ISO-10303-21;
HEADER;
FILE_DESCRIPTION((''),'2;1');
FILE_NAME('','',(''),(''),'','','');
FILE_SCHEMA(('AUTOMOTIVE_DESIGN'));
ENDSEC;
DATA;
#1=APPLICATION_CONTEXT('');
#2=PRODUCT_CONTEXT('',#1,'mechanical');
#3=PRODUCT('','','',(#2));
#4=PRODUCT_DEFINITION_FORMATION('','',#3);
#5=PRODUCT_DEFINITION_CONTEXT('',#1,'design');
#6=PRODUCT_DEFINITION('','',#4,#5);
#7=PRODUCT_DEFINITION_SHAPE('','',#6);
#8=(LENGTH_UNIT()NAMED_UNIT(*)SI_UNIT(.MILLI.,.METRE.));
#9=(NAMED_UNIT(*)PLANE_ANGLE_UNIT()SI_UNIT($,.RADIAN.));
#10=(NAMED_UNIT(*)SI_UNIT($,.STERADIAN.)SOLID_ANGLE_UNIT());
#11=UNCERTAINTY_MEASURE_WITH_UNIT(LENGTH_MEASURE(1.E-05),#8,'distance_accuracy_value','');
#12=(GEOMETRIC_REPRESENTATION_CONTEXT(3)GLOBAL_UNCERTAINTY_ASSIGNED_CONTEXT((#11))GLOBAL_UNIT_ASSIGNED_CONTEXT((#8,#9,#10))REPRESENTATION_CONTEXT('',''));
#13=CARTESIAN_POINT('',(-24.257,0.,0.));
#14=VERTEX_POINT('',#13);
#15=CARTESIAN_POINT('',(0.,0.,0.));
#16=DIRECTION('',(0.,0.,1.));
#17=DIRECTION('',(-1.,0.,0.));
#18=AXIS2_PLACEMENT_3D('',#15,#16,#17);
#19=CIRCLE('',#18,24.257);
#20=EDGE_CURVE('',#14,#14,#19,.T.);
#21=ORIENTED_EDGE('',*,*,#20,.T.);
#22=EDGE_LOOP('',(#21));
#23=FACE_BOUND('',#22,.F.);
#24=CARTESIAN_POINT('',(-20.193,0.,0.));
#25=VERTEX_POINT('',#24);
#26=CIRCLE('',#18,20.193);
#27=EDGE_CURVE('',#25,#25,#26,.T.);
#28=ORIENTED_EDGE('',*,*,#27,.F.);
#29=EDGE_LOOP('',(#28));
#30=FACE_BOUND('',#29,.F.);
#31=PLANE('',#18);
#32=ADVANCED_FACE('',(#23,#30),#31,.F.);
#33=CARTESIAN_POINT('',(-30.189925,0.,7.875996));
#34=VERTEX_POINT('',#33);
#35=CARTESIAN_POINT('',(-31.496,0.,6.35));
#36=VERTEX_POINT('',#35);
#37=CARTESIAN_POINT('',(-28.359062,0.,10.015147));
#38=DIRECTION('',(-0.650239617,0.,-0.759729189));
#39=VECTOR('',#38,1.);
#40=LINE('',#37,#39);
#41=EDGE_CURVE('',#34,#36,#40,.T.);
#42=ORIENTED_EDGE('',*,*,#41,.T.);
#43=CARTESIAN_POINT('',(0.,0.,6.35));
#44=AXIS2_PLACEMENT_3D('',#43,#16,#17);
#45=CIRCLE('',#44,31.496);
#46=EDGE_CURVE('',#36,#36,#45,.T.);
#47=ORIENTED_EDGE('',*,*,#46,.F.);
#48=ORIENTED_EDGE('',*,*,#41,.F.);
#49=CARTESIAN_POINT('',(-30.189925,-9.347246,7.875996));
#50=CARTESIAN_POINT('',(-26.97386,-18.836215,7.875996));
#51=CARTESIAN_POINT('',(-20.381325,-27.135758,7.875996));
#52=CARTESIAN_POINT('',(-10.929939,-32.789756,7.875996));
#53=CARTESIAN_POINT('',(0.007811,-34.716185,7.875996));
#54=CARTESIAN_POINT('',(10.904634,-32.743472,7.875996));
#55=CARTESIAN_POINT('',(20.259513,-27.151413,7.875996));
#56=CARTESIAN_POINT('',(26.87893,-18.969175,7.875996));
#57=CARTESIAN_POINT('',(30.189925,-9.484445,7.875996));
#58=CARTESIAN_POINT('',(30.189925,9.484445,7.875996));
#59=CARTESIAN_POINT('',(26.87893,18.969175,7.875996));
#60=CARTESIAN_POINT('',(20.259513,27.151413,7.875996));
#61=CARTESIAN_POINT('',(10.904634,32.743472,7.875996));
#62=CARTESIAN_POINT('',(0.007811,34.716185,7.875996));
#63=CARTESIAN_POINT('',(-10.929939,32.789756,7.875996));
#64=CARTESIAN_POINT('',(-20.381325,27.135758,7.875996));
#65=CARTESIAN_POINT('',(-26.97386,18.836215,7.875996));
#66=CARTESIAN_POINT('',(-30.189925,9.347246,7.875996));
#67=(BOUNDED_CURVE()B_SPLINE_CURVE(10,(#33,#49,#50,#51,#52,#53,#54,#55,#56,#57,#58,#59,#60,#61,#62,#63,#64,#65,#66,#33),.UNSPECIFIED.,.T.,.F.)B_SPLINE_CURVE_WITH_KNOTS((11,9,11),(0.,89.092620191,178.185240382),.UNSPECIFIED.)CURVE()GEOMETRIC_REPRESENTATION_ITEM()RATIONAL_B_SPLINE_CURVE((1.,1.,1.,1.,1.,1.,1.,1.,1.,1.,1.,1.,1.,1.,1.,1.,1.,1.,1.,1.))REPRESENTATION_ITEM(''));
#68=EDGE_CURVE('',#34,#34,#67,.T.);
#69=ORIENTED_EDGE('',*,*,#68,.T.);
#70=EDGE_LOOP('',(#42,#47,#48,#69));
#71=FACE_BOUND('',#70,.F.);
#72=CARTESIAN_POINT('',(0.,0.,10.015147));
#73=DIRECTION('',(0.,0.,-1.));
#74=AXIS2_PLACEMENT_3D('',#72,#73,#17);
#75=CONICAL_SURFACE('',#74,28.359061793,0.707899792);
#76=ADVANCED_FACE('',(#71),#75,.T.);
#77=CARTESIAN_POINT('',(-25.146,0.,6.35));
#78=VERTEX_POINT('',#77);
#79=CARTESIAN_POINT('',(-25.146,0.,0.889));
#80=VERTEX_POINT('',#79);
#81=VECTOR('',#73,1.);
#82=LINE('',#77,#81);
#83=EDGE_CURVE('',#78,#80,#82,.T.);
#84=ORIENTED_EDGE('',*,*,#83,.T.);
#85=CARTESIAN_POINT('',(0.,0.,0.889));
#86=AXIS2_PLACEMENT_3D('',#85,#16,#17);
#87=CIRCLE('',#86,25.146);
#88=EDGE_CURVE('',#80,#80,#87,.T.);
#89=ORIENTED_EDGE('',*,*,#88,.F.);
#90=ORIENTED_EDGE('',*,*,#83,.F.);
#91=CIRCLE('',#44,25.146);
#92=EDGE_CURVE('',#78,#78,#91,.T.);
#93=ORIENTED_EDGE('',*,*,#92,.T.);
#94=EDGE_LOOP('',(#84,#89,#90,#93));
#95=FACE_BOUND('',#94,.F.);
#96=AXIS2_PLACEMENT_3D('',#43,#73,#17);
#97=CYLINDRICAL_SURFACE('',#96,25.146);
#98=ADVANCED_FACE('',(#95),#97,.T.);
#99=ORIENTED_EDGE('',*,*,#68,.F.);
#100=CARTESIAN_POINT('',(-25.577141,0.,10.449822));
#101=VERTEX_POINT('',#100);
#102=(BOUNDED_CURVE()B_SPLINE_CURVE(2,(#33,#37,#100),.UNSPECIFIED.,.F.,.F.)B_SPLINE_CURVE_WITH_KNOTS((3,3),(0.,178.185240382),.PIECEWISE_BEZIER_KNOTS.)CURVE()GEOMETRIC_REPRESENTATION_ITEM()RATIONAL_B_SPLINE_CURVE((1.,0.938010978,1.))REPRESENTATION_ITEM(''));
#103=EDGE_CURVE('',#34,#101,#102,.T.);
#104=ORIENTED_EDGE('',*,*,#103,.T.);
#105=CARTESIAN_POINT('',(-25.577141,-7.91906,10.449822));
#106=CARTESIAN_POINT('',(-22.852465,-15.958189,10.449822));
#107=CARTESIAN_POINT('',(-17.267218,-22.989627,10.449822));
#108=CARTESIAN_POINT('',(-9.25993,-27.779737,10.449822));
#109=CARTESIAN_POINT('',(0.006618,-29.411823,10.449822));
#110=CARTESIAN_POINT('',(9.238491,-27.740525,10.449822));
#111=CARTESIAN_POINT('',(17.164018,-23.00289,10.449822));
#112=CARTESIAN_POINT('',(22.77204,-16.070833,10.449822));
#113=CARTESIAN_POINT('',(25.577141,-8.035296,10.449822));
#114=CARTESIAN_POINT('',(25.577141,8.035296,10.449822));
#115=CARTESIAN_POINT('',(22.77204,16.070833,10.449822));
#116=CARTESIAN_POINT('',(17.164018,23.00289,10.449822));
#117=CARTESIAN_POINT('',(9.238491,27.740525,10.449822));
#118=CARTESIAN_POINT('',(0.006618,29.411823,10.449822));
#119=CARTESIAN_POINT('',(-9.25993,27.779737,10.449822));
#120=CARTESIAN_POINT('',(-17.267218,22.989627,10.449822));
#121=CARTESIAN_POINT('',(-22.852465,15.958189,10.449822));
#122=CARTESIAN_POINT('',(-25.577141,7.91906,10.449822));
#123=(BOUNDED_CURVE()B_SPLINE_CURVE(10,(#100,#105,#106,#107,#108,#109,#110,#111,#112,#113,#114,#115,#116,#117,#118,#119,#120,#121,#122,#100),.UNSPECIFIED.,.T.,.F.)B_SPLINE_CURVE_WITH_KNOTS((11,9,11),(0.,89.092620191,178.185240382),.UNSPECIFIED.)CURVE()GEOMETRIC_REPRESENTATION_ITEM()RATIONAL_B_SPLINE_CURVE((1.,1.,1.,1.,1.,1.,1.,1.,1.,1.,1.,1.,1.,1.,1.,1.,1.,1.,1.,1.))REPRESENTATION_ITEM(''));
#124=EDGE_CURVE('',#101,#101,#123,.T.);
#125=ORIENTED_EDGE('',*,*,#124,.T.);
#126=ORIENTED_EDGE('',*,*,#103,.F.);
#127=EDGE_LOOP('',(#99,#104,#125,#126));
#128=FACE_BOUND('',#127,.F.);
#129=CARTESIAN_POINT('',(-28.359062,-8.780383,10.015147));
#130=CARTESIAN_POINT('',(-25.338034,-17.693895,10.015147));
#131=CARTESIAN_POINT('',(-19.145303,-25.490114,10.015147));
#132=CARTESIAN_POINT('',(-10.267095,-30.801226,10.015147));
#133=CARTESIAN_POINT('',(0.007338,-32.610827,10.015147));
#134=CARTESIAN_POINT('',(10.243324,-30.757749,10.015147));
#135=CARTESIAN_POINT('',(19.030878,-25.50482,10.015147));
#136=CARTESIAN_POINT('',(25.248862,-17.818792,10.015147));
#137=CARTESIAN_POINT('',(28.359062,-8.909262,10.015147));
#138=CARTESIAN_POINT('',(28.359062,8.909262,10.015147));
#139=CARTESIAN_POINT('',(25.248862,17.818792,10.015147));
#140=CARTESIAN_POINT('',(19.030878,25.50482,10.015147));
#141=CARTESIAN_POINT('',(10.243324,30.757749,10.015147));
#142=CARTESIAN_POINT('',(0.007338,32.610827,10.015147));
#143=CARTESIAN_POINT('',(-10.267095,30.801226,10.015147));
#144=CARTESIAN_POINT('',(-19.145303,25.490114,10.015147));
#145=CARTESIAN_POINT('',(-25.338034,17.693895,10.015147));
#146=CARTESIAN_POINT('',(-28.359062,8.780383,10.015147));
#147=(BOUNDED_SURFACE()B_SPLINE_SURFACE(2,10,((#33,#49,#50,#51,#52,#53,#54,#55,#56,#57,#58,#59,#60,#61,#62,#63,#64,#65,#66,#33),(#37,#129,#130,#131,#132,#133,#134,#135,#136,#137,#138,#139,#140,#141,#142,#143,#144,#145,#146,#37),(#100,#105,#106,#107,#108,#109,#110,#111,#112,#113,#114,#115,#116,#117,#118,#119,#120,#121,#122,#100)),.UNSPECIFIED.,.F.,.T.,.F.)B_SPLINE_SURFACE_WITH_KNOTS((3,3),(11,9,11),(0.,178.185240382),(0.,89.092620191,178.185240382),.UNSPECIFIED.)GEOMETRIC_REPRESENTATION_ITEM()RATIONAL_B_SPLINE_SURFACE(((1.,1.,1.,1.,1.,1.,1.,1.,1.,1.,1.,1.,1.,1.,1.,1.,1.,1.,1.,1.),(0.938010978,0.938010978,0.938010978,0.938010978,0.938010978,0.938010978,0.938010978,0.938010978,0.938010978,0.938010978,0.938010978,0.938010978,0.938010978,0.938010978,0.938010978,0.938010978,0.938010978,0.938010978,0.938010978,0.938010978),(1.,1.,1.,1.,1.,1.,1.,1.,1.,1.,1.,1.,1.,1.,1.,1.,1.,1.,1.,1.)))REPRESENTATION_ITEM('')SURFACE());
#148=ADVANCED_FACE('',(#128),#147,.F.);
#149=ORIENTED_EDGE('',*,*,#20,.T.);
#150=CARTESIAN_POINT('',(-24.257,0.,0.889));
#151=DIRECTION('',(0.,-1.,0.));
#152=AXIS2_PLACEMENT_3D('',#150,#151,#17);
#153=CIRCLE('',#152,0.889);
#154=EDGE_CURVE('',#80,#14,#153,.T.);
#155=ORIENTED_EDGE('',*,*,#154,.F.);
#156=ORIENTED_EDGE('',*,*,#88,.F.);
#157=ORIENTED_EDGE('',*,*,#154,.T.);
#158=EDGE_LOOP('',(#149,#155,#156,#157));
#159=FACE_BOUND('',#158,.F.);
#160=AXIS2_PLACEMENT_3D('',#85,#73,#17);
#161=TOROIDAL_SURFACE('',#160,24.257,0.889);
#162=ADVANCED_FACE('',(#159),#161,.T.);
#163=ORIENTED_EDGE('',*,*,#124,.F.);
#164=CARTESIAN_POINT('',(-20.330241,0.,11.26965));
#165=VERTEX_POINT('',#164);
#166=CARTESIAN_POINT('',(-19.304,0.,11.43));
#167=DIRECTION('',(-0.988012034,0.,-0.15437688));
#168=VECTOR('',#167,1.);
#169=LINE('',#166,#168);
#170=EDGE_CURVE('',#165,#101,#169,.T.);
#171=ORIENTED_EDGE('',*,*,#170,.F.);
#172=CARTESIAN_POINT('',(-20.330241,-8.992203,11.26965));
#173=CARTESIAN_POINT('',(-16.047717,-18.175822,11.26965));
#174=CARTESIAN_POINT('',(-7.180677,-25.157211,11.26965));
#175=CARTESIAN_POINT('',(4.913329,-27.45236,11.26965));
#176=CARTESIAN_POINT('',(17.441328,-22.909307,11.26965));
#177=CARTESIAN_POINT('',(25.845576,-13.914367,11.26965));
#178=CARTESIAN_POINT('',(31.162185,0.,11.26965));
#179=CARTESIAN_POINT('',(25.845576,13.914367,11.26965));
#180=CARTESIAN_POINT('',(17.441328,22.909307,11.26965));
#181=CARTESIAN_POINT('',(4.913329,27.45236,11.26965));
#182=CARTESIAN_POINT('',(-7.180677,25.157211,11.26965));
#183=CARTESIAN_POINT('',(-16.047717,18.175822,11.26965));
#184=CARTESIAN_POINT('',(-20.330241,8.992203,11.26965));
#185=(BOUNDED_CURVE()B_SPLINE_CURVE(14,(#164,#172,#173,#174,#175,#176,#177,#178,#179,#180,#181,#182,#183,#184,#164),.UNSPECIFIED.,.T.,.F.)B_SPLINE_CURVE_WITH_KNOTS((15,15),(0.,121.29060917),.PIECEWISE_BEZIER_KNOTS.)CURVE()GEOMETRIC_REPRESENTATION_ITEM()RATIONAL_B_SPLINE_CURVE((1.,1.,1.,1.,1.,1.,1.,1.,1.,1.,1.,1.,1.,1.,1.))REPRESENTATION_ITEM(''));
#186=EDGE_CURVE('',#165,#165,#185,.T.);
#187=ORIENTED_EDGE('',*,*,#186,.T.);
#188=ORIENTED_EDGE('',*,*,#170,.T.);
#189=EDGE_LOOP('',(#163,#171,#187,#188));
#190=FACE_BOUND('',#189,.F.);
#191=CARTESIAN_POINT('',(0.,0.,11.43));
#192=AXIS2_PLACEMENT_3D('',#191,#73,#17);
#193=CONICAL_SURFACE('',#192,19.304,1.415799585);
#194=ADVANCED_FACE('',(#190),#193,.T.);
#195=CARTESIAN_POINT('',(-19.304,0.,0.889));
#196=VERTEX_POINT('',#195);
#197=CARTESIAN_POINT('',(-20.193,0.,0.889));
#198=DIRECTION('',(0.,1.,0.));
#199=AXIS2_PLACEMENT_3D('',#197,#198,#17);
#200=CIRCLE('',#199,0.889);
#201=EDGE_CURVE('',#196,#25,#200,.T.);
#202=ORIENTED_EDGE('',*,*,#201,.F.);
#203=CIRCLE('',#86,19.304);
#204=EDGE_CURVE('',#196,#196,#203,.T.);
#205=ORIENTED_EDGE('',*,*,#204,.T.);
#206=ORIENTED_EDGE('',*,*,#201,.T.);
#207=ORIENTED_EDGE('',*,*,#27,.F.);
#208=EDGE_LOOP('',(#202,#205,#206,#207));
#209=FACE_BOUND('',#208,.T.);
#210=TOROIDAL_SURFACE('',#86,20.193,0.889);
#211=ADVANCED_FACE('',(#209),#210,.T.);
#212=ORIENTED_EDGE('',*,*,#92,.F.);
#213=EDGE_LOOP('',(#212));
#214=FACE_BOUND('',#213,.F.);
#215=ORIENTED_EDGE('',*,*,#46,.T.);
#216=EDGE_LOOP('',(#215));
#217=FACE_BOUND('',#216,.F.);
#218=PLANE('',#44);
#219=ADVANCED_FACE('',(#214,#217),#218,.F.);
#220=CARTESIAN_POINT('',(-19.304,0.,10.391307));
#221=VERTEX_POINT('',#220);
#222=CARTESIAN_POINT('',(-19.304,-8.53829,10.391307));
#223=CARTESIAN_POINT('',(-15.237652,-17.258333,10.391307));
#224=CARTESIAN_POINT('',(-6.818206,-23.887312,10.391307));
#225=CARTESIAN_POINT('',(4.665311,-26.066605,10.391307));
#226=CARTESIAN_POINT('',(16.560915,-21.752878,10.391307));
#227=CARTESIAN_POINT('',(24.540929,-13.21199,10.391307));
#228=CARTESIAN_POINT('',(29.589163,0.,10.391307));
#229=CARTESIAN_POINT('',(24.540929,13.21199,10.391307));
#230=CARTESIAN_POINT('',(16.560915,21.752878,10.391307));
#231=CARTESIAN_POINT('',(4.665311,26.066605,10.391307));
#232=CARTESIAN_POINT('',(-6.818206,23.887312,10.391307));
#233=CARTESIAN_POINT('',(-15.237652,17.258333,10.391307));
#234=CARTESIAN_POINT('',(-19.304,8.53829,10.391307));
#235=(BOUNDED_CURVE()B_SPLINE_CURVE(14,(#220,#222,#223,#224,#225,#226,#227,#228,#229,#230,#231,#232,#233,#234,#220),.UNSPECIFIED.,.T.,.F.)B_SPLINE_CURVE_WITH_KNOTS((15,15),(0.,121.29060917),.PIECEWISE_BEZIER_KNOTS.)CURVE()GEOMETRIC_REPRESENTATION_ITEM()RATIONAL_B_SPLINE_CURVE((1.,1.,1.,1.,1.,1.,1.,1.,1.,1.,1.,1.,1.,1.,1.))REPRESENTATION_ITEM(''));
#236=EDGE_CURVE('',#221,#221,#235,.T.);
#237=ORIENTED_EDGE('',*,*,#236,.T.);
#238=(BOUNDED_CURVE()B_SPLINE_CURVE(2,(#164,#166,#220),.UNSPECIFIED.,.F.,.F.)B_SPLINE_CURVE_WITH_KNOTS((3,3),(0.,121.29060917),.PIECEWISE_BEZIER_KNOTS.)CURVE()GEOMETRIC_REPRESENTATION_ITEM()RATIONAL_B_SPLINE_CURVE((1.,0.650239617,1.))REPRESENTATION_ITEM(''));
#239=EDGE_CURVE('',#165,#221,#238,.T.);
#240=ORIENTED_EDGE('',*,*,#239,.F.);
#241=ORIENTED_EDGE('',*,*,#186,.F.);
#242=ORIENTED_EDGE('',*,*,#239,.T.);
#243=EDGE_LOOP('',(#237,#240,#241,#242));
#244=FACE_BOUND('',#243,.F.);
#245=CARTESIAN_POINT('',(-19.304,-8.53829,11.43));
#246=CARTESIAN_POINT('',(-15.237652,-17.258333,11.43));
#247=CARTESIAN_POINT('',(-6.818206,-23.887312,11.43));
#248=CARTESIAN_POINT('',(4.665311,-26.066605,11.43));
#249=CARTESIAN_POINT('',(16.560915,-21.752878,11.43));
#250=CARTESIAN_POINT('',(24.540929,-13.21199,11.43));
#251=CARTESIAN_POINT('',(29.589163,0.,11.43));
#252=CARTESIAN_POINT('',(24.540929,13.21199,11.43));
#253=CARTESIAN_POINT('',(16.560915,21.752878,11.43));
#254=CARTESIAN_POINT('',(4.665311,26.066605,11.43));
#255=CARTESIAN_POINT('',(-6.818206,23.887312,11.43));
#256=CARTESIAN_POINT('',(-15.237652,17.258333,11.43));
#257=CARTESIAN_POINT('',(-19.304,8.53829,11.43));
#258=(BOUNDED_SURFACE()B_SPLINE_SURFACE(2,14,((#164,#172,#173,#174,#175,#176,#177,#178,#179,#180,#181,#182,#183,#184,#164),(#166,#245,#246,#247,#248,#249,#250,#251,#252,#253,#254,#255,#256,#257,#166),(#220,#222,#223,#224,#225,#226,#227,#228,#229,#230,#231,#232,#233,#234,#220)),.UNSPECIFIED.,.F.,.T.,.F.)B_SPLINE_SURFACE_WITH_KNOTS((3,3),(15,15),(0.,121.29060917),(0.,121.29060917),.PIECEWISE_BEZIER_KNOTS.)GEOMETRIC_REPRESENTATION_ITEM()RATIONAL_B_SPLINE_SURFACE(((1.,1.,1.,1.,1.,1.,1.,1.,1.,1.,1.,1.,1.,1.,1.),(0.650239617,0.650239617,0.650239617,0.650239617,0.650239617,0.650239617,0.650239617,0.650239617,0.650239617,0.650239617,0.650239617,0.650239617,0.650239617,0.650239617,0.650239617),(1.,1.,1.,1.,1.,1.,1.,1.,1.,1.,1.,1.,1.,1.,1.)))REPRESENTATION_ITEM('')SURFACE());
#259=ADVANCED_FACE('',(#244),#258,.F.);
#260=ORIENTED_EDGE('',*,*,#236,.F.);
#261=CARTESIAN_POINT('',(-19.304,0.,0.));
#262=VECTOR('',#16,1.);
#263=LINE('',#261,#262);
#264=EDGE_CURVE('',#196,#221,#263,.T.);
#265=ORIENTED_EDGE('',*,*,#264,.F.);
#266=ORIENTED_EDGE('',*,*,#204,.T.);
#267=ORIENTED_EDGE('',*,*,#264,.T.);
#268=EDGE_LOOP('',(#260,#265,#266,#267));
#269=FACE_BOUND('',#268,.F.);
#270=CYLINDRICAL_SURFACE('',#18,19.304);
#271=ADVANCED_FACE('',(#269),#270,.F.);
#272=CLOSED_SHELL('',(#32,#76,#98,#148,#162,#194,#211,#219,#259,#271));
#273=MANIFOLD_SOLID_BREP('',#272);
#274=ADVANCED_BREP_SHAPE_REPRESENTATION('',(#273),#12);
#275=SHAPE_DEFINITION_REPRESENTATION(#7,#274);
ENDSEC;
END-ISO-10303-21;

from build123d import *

# Parameters (mm, degrees)
F3_R = 7.62
F4_R = 0.889


# Not quite as in the source:
# - a fillet or chamfer that OpenCascade refuses, or shapes differently, is made with other operations: its cross-section is extruded or revolved along the edge and cut away or added


with BuildPart() as f1:
    # F0 (on Front) → F1 (revolve)
    with BuildSketch(Plane.XZ):
        Polygon((-25.146, 6.35), (-25.146, 0), (-19.304, 0), (-19.304, 11.43), (-31.496, 9.525), (-31.496, 6.35), align=None)
    revolve(axis=Axis((0, 0, 48.3202852037), (0, 0, 1)))

    # F2: chamfer of 3.175 on 1 edges, made by hand

    # F2_s1 → F2_t2 (revolve, cut)
    with BuildSketch(Plane.XZ):
        Polygon((-28.3590617928, 10.0151465949), (-31.496, 6.35), (-31.496, 9.525), align=None)
    revolve(axis=Axis((0, 0, 9.525), (0, 0, 1)), mode=Mode.SUBTRACT)

    # F3
    f3_edges = [f1.edges().sort_by_distance(p)[0] for p in [
        (28.359062, 0, 10.015147),
    ]]
    fillet(f3_edges, radius=F3_R)

    # F4
    f4_edges = [f1.edges().sort_by_distance(p)[0] for p in [
        (19.304, 0, 11.43),
        (19.304, 0, 0),
        (25.146, 0, 0),
    ]]
    fillet(f4_edges, radius=F4_R)


solid = f1.part
